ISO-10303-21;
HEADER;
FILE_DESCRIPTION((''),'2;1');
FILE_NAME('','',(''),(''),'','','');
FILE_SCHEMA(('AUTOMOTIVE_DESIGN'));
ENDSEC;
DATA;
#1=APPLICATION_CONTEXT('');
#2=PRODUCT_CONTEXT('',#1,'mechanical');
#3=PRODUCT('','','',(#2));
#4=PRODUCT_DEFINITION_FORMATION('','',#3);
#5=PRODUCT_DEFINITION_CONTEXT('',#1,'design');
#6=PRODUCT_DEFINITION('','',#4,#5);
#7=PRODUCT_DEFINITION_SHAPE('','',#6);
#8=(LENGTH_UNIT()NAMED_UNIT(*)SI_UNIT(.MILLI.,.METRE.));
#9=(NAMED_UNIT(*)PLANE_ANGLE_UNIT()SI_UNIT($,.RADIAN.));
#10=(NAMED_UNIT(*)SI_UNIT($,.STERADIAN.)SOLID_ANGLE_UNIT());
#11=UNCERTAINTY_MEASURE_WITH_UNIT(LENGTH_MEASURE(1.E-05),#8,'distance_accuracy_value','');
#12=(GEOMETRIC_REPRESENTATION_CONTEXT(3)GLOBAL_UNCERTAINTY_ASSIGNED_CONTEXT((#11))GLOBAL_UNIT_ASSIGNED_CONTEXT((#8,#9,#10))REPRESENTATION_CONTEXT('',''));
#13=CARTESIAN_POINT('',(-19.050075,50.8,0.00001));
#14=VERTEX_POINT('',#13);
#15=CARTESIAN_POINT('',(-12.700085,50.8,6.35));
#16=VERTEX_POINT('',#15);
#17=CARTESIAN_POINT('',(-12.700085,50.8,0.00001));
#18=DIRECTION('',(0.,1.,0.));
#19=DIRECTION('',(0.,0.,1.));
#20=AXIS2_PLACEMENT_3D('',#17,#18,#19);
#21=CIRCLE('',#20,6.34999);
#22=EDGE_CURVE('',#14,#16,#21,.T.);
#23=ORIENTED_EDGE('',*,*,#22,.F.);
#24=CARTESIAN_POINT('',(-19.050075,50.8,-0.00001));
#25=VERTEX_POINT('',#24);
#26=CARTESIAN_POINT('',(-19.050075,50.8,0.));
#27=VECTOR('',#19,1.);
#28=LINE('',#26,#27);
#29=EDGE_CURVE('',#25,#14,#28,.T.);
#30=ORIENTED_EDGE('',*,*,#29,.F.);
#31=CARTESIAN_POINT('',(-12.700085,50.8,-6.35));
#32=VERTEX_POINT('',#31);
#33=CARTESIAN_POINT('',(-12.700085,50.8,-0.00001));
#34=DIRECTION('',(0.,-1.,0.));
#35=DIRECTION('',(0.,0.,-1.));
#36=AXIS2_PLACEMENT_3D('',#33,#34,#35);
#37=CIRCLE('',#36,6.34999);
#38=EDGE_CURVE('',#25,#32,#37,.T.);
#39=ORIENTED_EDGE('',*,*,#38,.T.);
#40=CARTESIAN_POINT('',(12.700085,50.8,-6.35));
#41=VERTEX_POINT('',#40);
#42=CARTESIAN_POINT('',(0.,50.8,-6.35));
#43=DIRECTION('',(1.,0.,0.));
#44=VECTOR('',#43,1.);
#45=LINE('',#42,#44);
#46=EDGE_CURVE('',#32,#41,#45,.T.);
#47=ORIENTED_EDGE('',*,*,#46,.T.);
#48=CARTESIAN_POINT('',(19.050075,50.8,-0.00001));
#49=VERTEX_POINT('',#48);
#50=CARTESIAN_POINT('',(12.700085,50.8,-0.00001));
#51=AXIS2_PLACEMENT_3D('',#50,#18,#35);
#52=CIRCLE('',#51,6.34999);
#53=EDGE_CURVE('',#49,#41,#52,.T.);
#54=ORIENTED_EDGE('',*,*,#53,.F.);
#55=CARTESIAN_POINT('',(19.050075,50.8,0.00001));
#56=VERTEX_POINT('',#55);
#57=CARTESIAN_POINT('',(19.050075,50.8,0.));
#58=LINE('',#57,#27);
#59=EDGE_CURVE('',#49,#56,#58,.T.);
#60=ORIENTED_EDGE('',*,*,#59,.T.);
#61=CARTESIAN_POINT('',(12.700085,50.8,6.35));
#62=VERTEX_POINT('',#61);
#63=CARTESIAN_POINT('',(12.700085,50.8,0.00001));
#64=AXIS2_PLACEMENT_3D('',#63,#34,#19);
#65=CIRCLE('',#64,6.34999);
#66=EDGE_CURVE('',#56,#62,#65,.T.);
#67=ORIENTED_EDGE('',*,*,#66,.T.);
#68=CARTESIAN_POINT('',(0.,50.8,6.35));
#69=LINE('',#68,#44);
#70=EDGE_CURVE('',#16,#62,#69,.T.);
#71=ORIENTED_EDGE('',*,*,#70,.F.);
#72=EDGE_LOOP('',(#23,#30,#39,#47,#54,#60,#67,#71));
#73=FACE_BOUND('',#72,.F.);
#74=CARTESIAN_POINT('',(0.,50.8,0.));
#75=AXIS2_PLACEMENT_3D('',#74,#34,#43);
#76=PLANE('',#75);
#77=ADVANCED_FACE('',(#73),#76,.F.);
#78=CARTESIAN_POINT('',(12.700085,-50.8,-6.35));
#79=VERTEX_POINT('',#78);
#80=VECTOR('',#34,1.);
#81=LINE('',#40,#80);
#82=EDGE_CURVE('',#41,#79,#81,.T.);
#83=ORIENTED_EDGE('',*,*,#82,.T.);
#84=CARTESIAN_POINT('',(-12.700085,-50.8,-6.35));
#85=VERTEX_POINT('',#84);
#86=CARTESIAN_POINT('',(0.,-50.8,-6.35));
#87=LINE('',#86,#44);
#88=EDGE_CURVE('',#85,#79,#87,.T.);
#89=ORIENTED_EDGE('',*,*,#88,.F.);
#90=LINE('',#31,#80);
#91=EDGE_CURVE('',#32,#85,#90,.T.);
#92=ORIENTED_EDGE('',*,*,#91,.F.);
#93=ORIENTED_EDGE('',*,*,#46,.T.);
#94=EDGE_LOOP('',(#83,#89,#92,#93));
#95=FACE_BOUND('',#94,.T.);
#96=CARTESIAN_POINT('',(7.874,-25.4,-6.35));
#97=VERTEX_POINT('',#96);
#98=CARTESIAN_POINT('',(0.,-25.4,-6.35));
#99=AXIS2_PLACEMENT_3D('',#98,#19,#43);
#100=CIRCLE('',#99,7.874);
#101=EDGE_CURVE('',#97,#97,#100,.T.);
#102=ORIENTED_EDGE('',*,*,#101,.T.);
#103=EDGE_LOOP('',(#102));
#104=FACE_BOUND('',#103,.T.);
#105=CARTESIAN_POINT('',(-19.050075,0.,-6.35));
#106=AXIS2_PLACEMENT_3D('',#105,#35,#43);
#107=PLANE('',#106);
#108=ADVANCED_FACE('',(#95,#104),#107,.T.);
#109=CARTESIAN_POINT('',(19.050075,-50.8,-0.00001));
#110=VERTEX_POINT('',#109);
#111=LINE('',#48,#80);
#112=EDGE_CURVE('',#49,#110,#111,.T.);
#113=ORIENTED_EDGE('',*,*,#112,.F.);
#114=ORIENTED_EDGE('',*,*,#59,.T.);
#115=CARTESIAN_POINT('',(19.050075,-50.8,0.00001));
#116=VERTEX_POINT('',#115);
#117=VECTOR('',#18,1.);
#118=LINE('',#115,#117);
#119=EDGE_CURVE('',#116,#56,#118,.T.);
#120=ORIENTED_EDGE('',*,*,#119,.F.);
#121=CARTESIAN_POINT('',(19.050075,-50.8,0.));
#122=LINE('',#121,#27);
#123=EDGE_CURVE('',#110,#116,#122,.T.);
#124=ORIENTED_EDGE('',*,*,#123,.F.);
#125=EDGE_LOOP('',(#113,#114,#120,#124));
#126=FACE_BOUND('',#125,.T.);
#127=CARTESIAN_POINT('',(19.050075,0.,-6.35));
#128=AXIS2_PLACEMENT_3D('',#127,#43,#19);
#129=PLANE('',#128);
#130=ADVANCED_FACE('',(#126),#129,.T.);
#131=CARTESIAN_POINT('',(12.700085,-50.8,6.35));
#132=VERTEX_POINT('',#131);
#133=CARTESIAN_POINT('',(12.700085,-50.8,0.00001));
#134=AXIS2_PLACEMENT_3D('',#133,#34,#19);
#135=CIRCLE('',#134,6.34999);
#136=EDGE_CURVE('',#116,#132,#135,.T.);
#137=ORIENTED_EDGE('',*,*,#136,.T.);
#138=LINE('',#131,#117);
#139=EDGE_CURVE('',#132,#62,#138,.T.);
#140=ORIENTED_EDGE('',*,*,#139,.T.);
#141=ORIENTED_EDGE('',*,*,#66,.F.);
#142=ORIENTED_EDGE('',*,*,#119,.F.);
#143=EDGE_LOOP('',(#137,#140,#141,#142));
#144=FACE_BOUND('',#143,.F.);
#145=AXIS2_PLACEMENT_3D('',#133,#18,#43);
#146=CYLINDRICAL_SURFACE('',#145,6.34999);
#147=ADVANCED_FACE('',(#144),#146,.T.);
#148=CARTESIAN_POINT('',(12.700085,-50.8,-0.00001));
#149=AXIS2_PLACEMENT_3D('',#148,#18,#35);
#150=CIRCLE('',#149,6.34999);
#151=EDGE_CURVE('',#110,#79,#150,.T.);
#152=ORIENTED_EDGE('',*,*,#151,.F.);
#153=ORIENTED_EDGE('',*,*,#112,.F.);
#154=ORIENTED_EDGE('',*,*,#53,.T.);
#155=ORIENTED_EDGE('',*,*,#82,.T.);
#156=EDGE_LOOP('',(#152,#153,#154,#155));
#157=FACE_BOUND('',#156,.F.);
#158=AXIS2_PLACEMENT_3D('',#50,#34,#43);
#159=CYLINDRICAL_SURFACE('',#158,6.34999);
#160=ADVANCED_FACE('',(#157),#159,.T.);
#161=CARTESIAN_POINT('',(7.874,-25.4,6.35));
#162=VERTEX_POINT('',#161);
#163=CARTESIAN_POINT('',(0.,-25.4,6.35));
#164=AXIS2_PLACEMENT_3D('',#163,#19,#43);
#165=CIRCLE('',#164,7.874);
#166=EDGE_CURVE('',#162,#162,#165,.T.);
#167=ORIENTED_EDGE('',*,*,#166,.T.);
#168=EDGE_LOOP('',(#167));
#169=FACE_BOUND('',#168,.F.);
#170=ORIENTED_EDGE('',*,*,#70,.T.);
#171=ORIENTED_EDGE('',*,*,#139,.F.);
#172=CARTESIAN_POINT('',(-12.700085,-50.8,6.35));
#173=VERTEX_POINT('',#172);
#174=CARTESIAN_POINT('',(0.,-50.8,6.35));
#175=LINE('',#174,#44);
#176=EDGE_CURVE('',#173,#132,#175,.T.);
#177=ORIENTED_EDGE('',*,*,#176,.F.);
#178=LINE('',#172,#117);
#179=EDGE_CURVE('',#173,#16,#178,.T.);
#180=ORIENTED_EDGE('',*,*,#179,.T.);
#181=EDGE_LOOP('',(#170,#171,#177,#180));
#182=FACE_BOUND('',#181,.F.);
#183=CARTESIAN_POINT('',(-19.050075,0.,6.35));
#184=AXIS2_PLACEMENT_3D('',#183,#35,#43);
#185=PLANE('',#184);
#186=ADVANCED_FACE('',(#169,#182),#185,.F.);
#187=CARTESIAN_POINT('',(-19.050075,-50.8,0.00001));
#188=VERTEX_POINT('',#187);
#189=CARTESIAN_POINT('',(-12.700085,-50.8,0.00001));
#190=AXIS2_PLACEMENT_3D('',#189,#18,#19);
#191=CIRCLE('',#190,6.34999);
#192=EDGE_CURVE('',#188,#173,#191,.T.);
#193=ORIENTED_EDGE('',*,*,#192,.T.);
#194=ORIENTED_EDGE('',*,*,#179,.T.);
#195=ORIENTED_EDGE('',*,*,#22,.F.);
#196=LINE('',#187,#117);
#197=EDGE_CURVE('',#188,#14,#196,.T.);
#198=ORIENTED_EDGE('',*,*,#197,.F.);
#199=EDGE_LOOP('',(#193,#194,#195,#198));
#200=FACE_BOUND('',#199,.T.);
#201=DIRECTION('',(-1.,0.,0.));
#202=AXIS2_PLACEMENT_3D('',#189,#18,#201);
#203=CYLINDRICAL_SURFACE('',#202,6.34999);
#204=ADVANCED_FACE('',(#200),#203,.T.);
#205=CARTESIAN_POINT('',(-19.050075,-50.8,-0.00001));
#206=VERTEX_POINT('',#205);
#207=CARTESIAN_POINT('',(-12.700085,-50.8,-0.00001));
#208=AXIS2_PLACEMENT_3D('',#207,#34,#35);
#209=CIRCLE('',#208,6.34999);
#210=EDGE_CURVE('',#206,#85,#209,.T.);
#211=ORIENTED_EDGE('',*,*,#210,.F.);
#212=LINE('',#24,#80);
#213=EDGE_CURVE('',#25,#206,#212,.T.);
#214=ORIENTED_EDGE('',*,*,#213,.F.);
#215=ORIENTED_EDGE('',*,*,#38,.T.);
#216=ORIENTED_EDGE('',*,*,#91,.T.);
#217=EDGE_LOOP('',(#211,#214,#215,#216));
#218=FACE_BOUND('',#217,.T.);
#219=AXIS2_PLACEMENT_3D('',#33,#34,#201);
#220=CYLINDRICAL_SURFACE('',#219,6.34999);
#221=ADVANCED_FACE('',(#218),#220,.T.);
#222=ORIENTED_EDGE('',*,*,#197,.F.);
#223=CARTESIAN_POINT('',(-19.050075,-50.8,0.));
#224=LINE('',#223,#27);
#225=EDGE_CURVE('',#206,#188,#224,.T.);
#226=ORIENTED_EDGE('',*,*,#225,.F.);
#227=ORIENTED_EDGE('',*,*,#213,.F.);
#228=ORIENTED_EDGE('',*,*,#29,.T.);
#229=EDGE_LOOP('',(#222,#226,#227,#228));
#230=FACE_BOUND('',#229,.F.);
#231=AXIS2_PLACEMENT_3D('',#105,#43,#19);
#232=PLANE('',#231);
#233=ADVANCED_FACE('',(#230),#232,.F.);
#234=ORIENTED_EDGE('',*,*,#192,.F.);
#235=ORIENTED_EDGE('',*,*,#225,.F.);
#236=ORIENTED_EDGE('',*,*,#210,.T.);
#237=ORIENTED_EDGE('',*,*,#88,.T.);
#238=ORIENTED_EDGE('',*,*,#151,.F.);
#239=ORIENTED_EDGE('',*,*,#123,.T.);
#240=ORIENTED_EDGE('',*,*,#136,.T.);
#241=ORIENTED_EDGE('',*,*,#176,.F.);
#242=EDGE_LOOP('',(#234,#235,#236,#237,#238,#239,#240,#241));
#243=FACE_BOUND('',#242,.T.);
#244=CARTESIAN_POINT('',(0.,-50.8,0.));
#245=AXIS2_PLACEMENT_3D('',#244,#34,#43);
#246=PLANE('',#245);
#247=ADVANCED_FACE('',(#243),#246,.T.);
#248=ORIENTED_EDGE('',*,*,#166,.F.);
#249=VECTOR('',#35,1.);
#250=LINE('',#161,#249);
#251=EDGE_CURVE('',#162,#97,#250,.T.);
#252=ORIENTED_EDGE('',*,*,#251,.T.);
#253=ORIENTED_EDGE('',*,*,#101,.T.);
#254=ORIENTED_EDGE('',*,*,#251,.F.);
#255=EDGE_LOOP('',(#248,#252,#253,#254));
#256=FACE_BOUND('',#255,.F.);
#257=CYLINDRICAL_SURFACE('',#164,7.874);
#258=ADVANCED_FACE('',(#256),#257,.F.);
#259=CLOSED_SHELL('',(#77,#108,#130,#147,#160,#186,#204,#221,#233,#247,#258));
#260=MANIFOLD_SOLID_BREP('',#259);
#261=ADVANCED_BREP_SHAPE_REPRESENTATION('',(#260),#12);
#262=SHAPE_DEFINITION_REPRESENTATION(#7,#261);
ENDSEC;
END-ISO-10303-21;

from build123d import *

# Parameters (mm, degrees)
F0_W     = 38.10014986
F0_H     = 12.7
F1_DEPTH = 50.8
F2_R     = 6.34999
F3_R     = 7.874
F4_DEPTH = 12.701


# Not quite as in the source:
# - a fillet or chamfer is up to 0.001 mm smaller than in the source, because OpenCascade refuses the exact size


with BuildPart() as f1:
    # F0 (on Front) → F1 (new body, symmetric)
    with BuildSketch(Plane.XZ):
        Rectangle(F0_W, F0_H)
    extrude(amount=F1_DEPTH, both=True)

    # F2 (radius 6.35 in the source; OpenCascade refuses exactly that, so slightly less here)
    f2_edges = [f1.edges().sort_by_distance(p)[0] for p in [
        (-19.050075, 0, 6.35),
        (19.050075, 0, 6.35),
        (19.050075, 0, -6.35),
        (-19.050075, 0, -6.35),
    ]]
    fillet(f2_edges, radius=F2_R)

    # F3 (on face) → F4 (cut, through all)
    with BuildSketch(Plane.XY.offset(6.35)):
        with Locations((0, -25.4)):
            Circle(F3_R)
    extrude(amount=-F4_DEPTH, mode=Mode.SUBTRACT)


solid = f1.part
